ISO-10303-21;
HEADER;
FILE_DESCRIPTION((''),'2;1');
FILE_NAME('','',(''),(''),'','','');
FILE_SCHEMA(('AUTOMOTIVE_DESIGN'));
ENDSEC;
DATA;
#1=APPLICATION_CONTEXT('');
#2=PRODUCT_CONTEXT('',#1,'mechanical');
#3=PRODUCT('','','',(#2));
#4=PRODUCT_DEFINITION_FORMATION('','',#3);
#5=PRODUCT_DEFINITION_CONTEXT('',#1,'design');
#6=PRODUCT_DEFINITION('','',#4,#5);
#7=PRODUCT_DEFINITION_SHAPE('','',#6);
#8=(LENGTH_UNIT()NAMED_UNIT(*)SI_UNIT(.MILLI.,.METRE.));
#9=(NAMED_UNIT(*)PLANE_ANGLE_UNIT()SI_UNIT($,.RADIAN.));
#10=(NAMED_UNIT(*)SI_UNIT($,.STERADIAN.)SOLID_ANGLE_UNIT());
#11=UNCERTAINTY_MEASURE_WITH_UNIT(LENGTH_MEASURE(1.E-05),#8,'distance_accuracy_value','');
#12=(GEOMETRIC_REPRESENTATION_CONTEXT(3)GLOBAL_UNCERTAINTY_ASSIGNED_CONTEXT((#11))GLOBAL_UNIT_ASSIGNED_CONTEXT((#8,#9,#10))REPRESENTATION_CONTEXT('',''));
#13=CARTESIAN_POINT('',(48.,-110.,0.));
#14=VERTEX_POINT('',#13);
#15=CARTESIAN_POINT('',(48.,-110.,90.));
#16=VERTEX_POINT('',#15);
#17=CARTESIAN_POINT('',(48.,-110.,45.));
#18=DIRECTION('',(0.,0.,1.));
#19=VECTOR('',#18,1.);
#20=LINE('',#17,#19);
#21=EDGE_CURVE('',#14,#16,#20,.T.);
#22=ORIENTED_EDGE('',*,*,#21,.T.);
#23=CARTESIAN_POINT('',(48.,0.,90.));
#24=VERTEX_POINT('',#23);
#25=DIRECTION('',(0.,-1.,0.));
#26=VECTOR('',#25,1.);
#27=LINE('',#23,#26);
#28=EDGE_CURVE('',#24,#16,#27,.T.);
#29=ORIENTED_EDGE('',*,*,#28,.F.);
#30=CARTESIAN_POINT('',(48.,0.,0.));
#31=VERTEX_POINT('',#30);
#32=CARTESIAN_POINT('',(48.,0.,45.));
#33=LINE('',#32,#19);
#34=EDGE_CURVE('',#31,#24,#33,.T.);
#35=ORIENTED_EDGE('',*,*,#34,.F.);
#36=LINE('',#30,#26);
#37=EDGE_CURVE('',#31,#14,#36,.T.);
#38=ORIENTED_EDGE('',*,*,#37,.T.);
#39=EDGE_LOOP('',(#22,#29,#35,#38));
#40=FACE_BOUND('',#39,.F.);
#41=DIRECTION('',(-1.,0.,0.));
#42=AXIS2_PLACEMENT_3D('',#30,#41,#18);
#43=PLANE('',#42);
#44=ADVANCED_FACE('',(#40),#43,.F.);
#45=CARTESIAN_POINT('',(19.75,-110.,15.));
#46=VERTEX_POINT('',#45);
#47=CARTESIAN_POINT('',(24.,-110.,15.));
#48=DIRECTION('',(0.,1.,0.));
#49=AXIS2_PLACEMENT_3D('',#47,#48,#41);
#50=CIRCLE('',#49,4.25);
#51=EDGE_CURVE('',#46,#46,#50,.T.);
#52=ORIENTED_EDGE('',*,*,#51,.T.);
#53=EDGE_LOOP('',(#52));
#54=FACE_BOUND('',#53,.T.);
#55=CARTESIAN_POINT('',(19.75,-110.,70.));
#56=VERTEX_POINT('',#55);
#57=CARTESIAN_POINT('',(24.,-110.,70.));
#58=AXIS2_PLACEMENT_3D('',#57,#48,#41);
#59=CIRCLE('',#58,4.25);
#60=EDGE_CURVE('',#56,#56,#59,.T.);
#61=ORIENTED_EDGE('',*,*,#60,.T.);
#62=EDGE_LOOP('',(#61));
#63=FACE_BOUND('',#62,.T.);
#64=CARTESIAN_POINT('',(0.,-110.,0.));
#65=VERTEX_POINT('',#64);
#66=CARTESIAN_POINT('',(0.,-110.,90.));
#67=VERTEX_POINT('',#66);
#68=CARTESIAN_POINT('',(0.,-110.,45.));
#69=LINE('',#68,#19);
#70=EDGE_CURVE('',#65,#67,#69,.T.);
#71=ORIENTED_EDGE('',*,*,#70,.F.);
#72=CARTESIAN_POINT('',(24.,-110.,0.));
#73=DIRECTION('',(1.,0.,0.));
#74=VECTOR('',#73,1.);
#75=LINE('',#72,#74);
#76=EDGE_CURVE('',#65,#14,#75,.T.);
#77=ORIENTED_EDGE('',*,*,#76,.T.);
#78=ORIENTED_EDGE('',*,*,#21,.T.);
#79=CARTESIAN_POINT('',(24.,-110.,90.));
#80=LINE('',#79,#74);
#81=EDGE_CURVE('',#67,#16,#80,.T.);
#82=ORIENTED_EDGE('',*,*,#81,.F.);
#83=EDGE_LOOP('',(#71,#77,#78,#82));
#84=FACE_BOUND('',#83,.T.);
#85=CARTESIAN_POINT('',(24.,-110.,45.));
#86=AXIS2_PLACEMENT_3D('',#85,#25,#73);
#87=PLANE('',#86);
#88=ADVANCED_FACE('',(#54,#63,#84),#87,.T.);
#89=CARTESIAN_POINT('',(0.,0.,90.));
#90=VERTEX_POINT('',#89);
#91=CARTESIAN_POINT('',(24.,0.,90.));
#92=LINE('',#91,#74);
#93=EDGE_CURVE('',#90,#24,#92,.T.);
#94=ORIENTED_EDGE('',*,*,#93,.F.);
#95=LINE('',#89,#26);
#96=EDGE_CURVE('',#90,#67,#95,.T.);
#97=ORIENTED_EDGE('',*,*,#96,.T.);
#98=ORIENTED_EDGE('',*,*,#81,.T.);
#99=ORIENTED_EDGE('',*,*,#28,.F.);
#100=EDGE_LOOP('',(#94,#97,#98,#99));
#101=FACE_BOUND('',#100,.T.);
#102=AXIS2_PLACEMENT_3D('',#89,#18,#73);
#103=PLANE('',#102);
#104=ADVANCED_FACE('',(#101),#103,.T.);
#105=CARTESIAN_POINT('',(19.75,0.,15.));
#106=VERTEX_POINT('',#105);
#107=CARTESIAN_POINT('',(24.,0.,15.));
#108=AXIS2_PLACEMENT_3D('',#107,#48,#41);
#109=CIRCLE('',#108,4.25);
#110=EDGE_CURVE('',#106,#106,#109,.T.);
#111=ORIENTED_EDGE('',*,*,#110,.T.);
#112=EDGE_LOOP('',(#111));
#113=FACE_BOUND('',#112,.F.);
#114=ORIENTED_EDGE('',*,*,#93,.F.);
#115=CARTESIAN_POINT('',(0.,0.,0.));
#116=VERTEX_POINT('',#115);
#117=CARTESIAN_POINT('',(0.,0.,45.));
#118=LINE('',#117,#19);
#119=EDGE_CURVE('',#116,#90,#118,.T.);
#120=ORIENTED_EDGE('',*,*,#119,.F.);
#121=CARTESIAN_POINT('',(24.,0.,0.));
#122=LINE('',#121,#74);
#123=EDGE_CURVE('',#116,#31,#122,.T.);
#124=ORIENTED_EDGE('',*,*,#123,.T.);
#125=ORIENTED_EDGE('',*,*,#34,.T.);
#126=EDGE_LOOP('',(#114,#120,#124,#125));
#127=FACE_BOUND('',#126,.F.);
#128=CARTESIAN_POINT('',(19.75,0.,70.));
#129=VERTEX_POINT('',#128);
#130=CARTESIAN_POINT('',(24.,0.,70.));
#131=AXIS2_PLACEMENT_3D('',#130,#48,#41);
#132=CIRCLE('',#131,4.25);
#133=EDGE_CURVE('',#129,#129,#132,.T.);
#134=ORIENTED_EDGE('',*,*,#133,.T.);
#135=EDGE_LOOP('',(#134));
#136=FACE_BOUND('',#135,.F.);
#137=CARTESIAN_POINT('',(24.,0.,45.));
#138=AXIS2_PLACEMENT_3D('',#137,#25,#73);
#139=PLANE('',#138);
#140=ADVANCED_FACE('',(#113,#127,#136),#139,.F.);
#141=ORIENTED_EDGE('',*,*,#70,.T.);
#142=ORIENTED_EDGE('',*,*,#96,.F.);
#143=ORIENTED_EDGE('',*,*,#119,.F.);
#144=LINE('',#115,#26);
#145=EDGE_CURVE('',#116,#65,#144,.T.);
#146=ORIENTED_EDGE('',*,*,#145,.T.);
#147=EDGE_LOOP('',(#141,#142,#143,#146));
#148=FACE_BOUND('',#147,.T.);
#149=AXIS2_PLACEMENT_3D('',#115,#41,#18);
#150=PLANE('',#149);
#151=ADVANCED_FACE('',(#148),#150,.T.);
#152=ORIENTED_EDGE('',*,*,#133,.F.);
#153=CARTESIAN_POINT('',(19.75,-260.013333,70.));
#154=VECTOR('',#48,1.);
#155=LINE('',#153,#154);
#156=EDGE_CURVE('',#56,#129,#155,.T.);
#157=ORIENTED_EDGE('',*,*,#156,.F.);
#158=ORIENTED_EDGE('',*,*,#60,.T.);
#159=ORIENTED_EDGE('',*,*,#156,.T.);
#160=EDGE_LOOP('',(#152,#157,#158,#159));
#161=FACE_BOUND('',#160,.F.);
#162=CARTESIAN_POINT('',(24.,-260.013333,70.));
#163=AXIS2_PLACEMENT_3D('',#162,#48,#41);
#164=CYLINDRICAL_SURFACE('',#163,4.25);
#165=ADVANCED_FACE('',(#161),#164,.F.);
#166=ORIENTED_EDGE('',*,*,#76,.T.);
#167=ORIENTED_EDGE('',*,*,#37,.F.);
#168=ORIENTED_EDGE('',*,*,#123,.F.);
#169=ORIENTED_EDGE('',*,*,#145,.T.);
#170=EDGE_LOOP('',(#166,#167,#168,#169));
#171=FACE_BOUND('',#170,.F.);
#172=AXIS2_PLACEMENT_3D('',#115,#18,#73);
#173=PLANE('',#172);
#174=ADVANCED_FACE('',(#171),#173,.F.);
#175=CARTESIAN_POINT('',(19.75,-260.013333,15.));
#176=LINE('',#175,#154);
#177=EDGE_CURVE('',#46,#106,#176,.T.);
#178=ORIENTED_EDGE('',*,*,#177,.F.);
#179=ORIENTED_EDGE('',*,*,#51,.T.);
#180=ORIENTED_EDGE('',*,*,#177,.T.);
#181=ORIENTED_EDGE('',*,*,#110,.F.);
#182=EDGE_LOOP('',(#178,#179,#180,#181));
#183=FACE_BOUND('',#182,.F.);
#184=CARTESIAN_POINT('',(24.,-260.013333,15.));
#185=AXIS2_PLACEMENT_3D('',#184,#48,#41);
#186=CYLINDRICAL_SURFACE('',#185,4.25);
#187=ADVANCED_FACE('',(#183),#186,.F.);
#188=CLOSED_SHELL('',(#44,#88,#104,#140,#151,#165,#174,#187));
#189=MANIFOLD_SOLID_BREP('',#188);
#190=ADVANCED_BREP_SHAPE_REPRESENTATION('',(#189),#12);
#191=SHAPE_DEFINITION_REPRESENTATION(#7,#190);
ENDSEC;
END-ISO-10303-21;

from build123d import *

# Parameters (mm, degrees)
F0_W     = 48
F0_H     = 90
F1_DEPTH = 110
F3_D     = 8.5


# Not quite as in the source:
# - the program builds the solid bodies; features that only make, move or delete a surface that nothing else refers to are left out


with BuildPart() as f1:
    # F0 (on Front) → F1 (new body)
    with BuildSketch(Plane.XZ):
        with Locations((24, 45)):
            Rectangle(F0_W, F0_H)
    extrude(amount=F1_DEPTH)

    # F3 (through all)
    with Locations(Plane.XZ.offset(110)):
        with Locations((24, 70), (24, 15)):
            Hole(F3_D / 2)


solid = f1.part
